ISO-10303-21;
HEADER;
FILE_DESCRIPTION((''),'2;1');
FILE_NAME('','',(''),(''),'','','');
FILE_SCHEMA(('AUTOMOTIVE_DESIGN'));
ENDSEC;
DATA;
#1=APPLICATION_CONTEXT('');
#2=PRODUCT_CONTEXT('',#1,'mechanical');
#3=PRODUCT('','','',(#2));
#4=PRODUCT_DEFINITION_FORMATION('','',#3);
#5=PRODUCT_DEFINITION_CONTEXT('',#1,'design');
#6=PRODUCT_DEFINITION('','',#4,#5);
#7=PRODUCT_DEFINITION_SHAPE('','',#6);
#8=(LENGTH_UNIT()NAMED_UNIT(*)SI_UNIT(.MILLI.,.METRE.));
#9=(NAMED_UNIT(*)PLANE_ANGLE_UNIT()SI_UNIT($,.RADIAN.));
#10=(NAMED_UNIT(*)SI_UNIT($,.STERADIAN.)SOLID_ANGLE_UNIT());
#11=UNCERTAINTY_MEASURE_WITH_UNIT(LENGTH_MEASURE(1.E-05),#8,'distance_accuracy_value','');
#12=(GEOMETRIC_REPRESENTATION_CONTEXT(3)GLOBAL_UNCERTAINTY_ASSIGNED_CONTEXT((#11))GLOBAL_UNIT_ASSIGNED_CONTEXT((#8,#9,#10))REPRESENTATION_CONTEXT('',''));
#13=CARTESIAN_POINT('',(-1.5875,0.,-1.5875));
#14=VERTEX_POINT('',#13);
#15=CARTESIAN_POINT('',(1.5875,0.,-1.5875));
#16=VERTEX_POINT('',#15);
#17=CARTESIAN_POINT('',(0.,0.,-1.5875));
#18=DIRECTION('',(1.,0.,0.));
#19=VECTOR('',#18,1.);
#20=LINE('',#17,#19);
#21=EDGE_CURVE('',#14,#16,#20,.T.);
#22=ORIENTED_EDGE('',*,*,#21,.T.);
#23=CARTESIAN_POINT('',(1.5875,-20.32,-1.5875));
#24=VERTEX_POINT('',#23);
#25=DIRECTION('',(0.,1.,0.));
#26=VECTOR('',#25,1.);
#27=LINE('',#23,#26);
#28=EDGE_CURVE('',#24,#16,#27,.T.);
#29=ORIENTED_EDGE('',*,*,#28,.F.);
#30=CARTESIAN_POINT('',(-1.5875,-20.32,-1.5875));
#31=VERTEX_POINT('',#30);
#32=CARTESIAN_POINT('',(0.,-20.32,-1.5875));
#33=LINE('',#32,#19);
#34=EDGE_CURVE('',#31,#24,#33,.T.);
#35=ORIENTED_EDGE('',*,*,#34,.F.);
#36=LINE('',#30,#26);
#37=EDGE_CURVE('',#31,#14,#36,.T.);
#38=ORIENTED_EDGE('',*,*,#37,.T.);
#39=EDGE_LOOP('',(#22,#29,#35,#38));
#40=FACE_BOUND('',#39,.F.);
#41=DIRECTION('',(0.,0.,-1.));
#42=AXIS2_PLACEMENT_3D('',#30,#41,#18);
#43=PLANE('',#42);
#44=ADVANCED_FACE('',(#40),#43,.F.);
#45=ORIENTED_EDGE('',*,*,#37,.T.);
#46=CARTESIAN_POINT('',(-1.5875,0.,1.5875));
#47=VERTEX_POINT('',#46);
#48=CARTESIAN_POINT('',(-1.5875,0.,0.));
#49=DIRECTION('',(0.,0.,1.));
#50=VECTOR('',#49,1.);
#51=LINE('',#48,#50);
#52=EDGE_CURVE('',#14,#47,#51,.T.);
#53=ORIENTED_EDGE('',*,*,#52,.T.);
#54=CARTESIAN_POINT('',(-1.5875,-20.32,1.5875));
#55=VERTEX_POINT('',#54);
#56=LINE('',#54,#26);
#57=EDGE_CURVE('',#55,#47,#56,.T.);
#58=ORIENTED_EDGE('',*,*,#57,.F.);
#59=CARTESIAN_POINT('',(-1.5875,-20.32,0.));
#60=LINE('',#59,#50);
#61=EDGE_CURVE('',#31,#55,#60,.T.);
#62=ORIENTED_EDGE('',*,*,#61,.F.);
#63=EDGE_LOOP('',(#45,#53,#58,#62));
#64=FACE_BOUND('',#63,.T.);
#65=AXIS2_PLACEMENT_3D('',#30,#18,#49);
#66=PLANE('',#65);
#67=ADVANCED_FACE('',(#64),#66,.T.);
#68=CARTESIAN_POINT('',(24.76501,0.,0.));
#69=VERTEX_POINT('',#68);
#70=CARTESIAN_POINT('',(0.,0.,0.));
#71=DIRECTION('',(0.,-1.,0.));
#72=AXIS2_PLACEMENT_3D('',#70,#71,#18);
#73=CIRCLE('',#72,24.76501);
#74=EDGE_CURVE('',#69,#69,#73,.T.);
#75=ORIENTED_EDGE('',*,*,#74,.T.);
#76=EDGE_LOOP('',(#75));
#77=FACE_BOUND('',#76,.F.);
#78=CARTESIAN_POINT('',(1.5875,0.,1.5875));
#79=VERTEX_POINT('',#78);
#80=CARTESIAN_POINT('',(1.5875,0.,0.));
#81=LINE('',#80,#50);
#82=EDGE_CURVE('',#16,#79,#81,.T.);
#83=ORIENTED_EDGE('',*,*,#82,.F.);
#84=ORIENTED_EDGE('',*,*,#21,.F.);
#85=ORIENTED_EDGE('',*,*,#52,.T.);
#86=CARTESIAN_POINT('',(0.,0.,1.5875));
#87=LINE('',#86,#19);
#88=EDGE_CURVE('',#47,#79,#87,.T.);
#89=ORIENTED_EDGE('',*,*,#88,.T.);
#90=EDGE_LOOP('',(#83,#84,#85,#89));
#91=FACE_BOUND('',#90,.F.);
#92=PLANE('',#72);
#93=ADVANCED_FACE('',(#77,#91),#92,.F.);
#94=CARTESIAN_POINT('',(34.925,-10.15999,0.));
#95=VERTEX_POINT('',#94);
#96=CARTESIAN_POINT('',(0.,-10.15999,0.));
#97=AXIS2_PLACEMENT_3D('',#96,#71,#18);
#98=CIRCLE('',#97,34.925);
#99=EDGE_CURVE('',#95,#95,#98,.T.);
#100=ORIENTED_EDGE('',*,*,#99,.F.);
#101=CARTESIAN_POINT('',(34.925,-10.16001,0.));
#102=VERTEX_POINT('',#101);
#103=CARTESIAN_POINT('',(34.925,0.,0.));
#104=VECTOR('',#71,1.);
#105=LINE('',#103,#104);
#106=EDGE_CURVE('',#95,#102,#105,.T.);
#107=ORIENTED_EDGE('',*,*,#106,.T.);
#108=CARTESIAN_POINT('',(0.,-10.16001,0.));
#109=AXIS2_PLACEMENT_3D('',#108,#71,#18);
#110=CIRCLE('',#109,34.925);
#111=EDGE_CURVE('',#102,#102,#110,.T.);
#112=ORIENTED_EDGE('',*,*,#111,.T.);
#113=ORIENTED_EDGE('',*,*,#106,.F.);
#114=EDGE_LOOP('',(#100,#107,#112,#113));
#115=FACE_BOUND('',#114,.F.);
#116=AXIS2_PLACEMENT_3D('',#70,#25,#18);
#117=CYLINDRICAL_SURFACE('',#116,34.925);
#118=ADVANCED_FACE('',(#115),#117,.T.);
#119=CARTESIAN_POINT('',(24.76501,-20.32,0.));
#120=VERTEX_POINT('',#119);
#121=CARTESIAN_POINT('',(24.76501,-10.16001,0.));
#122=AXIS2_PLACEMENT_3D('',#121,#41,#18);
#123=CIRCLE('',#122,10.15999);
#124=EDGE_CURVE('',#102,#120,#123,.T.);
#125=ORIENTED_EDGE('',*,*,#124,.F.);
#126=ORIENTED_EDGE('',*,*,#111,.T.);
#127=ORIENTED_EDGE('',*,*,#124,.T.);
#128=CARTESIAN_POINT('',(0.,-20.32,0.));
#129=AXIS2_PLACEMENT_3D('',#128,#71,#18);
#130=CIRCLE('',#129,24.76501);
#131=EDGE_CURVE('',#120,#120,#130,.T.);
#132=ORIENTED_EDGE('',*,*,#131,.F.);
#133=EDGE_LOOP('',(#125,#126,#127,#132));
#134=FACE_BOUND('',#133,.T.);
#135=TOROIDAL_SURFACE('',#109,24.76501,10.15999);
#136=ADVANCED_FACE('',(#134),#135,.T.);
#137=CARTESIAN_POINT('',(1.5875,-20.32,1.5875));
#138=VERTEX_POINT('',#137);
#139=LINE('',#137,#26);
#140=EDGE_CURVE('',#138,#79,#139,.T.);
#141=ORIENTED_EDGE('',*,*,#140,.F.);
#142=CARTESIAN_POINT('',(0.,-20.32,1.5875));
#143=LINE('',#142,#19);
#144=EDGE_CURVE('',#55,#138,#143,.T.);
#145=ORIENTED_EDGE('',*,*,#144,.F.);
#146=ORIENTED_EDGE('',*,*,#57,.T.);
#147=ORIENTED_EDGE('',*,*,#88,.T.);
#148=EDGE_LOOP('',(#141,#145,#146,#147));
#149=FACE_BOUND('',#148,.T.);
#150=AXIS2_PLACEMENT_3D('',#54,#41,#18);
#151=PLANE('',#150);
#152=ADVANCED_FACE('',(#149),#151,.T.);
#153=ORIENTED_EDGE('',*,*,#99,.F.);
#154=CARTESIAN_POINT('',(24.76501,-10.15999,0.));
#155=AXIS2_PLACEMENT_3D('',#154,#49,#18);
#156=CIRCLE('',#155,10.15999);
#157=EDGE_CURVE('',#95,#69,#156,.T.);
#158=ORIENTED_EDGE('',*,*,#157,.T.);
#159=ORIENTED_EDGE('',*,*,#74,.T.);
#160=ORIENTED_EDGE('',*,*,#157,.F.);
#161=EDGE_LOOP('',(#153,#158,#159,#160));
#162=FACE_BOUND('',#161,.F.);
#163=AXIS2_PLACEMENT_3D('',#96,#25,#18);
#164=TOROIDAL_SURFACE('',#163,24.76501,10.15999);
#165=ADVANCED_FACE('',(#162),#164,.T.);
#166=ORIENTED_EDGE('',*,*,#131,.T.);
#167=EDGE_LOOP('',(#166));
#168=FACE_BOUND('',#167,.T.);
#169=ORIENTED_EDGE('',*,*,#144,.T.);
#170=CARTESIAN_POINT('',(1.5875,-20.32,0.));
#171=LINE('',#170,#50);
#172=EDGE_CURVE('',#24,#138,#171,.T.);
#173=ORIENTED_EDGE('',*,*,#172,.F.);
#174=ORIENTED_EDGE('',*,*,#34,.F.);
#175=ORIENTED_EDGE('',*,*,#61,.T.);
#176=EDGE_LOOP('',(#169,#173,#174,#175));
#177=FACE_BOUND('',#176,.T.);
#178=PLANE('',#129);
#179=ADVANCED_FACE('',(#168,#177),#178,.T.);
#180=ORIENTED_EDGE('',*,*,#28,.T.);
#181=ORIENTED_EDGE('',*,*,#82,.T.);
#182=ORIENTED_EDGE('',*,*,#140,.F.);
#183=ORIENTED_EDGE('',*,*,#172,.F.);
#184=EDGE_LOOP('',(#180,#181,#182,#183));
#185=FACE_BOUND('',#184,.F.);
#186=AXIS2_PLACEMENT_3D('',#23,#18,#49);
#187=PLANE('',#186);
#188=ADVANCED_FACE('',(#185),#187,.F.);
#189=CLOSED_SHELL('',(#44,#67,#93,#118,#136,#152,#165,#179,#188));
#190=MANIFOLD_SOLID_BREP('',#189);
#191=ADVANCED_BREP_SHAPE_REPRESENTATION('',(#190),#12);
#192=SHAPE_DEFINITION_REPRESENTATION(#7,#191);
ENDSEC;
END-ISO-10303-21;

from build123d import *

# Parameters (mm, degrees)
F0_R     = 34.925
F1_DEPTH = 20.32
F2_R     = 10.15999
F3_W     = 3.175
F3_H     = 3.175
F4_DEPTH = 20.32


# Not quite as in the source:
# - a fillet or chamfer is up to 0.001 mm smaller than in the source, because OpenCascade refuses the exact size


with BuildPart() as f1:
    # F0 (on Front) → F1 (new body)
    with BuildSketch(Plane.XZ):
        Circle(F0_R)
    extrude(amount=F1_DEPTH)

    # F2 (radius 10.16 in the source; OpenCascade refuses exactly that, so slightly less here)
    f2_edges = [f1.edges().sort_by_distance(p)[0] for p in [
        (-34.925, -20.32, 0),
        (-34.925, 0, 0),
    ]]
    fillet(f2_edges, radius=F2_R)

    # F3 (on face) → F4 (cut, through all)
    with BuildSketch(Plane.XZ.offset(20.32)):
        Rectangle(F3_W, F3_H)
    extrude(amount=-F4_DEPTH, mode=Mode.SUBTRACT)


solid = f1.part
